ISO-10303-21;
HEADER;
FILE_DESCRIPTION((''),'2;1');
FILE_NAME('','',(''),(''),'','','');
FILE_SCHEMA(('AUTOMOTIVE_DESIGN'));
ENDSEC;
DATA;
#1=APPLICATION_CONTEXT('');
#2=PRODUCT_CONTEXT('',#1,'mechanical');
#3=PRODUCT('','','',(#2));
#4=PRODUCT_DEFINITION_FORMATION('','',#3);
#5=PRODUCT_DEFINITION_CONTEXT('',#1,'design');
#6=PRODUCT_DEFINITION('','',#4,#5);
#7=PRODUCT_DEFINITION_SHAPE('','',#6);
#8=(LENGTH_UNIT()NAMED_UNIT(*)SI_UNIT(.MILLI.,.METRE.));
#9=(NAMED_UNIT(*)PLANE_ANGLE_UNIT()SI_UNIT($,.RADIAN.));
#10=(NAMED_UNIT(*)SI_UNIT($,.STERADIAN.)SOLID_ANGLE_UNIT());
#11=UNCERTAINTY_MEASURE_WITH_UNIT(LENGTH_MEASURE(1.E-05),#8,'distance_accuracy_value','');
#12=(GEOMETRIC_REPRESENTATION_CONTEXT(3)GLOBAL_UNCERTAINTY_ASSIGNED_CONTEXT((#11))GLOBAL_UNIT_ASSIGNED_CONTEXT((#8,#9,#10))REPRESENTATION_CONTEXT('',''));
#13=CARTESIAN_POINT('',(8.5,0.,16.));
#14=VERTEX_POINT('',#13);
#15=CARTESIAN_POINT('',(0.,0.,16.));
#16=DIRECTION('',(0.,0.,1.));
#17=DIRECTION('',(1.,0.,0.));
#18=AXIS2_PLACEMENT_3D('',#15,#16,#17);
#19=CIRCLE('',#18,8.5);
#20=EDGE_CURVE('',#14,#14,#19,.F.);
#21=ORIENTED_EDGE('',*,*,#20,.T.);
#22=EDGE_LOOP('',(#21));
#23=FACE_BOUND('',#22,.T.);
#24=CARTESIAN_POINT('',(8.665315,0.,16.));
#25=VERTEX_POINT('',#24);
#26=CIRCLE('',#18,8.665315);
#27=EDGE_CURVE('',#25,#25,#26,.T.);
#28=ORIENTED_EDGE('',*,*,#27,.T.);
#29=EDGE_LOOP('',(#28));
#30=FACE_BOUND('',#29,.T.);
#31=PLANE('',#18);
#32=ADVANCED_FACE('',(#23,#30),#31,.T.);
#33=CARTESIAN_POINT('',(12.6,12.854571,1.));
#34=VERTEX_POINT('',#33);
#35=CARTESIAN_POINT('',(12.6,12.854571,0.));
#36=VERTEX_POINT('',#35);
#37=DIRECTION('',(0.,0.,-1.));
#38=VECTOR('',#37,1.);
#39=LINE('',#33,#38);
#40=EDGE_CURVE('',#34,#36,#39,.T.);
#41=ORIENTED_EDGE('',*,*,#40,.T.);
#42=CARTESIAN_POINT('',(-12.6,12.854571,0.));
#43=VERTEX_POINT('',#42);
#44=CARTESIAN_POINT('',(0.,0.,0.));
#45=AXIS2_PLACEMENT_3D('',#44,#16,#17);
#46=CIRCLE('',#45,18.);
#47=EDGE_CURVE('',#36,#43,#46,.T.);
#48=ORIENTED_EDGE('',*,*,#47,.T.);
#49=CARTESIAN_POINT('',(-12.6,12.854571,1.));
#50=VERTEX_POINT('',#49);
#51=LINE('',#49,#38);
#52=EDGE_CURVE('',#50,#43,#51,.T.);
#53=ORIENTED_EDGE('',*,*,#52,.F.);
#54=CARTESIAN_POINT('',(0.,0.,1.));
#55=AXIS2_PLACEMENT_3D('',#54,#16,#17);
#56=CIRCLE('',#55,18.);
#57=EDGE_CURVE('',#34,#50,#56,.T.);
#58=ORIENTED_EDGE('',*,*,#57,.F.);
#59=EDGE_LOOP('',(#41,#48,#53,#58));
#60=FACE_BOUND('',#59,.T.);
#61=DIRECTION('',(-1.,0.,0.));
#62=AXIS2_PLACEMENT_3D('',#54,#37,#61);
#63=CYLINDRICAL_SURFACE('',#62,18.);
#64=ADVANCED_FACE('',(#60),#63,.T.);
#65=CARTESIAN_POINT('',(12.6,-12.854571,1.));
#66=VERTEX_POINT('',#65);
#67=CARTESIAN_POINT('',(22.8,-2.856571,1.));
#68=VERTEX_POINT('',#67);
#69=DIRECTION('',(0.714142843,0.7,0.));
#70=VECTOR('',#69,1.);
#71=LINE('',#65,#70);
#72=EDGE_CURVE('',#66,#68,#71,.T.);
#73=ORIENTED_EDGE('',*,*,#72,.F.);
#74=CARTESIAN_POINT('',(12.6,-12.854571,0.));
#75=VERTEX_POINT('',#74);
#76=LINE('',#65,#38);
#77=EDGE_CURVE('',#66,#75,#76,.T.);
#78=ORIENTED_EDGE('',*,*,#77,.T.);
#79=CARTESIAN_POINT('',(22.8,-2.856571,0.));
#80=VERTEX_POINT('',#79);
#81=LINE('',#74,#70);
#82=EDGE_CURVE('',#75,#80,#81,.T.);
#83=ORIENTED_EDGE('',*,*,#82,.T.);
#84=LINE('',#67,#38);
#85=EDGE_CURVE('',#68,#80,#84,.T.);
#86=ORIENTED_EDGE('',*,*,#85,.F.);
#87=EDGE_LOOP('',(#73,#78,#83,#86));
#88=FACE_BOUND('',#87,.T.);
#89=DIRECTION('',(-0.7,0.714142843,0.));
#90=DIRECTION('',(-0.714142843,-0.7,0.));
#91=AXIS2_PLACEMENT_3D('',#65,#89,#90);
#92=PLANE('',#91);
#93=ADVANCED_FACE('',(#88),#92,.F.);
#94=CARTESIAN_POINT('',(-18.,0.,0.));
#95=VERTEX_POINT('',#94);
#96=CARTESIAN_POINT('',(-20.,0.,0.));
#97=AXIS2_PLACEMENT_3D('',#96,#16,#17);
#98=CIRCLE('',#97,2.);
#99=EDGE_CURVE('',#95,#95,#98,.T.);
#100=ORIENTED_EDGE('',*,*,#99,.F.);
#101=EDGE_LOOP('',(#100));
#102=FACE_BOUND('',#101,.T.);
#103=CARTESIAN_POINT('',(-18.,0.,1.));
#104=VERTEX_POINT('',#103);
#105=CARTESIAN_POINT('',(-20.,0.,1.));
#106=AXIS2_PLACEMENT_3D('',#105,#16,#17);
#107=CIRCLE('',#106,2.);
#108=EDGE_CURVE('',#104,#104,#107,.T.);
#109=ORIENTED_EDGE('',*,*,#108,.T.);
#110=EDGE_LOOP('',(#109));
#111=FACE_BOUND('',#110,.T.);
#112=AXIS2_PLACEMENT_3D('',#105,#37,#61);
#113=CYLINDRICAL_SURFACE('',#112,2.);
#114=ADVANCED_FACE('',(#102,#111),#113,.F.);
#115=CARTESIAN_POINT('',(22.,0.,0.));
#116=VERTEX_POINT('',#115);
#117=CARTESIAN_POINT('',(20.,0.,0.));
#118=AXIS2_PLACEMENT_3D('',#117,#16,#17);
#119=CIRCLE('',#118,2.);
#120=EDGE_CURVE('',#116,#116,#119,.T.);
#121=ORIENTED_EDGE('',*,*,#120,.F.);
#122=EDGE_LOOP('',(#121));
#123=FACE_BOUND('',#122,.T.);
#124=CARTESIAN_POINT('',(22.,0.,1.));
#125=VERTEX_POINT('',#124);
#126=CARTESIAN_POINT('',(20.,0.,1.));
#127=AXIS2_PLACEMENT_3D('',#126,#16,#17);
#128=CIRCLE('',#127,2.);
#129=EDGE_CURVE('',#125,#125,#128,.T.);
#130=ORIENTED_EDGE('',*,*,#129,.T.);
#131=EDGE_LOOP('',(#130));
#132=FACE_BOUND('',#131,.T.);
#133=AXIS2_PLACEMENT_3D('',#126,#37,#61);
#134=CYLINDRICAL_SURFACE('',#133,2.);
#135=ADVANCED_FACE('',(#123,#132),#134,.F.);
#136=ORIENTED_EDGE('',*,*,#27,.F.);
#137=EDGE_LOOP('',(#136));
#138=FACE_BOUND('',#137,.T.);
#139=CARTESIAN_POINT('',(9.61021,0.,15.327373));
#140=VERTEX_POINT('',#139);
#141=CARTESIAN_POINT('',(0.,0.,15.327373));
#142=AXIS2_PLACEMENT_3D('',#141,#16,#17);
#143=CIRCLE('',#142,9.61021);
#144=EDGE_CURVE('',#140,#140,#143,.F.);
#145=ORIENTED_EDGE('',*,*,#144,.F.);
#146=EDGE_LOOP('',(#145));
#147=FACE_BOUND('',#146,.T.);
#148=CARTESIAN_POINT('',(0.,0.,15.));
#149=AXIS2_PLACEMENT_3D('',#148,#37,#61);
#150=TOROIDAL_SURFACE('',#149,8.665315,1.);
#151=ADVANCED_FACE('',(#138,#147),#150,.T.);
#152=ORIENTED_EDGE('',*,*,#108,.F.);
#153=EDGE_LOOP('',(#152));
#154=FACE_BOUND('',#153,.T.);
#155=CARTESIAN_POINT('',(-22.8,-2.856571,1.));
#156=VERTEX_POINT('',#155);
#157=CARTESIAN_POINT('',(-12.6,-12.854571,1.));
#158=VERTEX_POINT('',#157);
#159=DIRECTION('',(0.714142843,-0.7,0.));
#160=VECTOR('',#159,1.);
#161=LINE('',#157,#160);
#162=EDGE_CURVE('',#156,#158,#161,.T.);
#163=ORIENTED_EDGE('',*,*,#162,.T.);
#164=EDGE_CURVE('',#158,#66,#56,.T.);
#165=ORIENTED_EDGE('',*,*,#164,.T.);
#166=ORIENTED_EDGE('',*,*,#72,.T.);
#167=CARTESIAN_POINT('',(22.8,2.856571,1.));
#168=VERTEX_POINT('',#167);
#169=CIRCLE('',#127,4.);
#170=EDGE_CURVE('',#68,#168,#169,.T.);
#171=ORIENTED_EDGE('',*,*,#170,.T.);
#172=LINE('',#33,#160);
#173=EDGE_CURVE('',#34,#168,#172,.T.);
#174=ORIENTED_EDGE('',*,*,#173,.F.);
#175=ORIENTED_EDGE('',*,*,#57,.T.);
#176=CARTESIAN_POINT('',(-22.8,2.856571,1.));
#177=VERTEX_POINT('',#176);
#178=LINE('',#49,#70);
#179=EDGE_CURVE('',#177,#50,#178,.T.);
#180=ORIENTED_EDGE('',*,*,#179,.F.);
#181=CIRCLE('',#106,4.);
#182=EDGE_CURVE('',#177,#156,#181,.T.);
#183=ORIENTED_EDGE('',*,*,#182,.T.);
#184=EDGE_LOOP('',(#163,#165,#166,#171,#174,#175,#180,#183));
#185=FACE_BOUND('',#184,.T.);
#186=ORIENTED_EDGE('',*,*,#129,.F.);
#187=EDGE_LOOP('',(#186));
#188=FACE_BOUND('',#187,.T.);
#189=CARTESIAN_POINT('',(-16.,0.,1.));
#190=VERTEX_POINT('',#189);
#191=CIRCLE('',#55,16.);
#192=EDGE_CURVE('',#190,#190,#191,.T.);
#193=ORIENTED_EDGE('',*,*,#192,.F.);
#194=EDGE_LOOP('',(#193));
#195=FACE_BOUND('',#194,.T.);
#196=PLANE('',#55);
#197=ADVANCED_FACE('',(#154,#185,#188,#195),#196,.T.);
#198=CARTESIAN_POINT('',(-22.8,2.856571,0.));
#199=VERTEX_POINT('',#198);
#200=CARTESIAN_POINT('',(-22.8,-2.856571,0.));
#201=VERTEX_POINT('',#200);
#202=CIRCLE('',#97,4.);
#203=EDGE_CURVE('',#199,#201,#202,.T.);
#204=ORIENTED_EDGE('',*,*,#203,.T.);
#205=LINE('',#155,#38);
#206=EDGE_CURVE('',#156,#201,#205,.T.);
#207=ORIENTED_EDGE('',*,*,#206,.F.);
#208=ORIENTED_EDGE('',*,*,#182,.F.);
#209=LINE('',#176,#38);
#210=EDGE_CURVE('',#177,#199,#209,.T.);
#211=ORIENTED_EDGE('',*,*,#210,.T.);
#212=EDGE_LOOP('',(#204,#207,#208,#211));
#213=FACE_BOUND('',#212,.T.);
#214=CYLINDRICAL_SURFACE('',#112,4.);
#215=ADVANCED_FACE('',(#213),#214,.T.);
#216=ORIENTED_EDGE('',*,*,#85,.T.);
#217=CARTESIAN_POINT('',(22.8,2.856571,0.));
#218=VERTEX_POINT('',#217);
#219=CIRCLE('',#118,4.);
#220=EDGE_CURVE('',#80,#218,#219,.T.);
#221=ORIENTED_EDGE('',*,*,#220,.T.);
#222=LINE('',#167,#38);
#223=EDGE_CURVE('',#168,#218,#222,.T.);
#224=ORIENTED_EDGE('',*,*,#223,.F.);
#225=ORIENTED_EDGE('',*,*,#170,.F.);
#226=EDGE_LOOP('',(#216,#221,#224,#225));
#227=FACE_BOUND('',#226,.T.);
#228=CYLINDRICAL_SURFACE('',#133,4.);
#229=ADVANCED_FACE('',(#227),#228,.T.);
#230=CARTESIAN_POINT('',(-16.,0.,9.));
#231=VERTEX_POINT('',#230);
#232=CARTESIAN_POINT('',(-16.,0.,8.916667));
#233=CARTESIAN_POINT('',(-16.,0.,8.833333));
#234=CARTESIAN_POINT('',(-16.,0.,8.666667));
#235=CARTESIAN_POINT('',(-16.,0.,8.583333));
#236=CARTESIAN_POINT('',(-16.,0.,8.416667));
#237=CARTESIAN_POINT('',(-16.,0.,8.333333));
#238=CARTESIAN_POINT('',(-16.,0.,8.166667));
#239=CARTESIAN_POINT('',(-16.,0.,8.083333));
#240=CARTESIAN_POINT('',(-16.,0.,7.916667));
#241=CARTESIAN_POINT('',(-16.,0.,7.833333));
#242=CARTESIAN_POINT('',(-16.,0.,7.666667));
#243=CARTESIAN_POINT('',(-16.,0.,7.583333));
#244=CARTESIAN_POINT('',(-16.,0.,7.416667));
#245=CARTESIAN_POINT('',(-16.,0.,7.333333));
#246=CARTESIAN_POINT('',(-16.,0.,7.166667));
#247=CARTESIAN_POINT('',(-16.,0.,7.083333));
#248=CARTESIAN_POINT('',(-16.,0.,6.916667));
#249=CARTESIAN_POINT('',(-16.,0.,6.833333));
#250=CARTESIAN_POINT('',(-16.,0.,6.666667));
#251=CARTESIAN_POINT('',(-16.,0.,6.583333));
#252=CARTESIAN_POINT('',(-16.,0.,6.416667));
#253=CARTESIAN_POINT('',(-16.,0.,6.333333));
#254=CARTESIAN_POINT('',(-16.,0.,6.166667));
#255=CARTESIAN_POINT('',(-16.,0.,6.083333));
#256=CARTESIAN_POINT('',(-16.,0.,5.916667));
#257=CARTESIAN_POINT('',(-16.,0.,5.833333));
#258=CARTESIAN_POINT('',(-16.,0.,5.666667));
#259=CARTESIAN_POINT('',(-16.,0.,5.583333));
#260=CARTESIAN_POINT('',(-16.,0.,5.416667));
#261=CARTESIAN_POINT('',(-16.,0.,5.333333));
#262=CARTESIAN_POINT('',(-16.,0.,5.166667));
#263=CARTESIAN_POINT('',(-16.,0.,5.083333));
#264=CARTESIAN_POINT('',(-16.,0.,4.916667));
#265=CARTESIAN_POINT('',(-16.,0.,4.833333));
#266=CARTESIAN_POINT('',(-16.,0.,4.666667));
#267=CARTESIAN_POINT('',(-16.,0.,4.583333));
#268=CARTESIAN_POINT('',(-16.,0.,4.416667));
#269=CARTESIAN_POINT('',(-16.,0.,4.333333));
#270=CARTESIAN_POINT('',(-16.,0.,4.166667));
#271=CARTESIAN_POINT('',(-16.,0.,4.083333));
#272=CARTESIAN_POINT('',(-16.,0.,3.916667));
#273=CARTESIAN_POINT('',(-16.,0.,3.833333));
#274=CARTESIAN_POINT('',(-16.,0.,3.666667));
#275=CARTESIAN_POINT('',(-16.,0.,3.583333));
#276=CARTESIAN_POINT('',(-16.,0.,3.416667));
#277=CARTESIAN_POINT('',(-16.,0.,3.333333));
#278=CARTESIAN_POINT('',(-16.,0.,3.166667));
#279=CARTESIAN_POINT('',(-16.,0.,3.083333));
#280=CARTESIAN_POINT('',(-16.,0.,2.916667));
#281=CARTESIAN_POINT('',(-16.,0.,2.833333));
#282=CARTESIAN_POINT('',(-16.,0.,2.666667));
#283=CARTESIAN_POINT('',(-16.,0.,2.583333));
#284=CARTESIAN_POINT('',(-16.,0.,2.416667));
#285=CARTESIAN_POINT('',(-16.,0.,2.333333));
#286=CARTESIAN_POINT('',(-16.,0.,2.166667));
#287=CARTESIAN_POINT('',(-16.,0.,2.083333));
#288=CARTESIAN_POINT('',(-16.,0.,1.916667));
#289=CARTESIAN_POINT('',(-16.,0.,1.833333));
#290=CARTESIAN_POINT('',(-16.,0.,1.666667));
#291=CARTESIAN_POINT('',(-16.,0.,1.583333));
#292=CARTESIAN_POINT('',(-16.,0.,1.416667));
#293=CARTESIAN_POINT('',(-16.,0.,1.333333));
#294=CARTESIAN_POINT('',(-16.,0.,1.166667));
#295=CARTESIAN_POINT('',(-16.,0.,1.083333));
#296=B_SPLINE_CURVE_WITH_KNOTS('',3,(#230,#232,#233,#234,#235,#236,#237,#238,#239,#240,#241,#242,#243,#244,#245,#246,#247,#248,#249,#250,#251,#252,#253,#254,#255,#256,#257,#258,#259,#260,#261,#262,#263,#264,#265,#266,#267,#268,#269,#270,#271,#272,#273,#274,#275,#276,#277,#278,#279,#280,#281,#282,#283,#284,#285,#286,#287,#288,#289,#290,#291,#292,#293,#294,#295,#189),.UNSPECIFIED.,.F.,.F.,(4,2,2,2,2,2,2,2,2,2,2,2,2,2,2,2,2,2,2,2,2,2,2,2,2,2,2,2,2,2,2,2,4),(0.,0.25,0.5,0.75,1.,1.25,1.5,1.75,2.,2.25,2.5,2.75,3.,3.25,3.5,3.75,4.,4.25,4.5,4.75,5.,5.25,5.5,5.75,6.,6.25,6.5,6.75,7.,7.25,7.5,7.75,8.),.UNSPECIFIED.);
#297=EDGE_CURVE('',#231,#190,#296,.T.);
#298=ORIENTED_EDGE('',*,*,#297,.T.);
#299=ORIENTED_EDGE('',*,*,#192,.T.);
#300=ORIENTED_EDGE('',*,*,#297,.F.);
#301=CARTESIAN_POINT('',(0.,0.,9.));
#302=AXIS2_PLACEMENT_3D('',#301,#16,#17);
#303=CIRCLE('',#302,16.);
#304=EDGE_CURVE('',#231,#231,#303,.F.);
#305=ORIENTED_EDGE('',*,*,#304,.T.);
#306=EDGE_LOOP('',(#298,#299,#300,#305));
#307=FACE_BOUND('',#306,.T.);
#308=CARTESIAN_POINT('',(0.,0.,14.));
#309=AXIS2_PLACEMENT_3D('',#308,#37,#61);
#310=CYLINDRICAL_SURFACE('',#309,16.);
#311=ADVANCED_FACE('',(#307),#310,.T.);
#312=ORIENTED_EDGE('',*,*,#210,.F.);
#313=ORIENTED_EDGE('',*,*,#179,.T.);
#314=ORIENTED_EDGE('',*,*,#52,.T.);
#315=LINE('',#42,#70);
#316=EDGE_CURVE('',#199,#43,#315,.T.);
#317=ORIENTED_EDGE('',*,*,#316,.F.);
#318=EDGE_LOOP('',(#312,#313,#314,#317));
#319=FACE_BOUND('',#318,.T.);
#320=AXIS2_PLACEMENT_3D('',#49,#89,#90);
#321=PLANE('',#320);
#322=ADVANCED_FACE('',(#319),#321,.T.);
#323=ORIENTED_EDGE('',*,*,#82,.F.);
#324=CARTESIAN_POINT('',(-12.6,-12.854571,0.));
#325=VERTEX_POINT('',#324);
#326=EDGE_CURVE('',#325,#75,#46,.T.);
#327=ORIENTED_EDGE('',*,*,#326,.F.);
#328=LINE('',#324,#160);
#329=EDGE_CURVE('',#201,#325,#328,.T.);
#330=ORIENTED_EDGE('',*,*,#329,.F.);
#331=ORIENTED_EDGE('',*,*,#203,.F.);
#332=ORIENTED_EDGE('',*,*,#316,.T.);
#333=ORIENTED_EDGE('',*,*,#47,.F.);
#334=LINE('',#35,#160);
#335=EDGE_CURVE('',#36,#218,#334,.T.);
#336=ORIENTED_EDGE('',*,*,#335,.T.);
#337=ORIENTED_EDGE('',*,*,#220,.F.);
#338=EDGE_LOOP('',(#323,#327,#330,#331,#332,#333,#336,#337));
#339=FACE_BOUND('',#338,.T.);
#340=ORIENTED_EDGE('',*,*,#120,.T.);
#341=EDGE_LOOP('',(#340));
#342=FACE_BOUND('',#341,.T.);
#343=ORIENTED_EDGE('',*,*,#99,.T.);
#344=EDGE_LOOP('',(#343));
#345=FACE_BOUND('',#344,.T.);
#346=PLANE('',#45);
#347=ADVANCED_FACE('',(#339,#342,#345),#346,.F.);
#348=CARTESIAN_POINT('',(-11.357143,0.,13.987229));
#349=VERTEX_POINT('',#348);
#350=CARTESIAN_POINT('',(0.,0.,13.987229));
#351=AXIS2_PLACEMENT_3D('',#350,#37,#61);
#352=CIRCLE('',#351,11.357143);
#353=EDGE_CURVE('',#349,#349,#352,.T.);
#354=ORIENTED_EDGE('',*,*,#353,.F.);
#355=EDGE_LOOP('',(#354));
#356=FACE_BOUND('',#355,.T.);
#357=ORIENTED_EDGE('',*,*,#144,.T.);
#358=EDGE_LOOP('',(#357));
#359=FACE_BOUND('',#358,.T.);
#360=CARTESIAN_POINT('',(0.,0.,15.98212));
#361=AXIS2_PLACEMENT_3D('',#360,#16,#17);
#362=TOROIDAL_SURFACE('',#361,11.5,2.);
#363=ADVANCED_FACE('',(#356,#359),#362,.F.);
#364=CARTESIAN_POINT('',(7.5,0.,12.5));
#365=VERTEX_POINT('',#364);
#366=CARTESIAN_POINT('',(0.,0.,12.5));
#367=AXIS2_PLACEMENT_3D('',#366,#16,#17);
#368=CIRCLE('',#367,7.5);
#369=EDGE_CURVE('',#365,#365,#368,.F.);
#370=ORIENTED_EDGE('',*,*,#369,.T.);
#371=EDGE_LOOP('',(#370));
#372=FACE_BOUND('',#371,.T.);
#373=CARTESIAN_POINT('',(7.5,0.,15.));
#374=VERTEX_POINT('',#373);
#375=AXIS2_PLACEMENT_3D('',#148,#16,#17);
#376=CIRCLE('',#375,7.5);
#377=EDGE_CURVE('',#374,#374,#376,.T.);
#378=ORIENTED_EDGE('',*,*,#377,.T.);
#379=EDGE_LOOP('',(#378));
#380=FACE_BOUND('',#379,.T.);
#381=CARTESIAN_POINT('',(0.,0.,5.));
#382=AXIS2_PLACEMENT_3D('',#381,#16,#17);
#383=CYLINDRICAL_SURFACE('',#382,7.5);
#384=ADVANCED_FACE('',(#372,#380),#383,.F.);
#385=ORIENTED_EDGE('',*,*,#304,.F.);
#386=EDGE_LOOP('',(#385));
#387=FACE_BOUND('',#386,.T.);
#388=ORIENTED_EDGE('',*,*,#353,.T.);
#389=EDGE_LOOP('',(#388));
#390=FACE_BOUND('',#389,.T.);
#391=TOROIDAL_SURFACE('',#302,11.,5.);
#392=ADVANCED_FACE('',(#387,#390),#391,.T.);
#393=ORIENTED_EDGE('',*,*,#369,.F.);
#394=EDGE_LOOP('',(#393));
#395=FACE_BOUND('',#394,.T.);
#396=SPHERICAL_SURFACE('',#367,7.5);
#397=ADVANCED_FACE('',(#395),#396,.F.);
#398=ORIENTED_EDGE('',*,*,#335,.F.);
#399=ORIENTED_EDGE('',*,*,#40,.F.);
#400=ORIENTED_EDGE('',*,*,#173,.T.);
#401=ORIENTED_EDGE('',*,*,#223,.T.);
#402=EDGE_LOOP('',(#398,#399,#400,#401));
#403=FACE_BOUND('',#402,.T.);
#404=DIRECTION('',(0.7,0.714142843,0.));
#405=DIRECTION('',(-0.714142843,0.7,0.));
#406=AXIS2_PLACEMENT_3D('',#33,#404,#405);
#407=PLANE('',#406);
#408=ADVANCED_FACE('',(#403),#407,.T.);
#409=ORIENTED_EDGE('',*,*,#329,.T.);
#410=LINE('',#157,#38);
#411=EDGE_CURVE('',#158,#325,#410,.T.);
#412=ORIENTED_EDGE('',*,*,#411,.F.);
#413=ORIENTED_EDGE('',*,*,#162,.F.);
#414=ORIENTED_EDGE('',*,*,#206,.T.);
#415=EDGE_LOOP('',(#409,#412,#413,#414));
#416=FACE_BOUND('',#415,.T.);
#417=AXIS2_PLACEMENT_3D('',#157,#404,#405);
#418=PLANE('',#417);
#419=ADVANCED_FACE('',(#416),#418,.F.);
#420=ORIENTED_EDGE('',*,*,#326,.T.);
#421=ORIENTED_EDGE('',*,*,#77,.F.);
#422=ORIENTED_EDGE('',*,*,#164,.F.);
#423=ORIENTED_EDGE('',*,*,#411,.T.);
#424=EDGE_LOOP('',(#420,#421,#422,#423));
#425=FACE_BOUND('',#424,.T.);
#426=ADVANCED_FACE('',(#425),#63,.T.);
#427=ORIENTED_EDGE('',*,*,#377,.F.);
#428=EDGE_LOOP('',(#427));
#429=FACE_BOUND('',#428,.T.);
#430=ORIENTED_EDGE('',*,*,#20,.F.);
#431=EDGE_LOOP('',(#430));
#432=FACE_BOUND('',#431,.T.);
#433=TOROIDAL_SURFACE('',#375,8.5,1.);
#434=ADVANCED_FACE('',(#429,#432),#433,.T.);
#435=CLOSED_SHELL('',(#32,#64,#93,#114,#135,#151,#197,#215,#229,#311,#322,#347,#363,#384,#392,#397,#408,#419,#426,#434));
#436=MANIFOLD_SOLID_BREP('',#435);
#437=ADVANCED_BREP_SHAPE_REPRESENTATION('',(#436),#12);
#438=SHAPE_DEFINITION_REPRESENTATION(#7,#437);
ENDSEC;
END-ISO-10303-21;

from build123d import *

# Parameters (mm, degrees)
SKETCH1_R           = 2
BOSS_EXTRUDE1_DEPTH = 1
SKETCH2_R           = 16
BOSS_EXTRUDE2_DEPTH = 13
SKETCH3_R           = 9.5
BOSS_EXTRUDE3_DEPTH = 2
FILLET1_R           = 5
FILLET2_R           = 2
SKETCH4_R           = 7.5
CUT_EXTRUDE1_DEPTH  = 11
FILLET3_R           = 7.5
FILLET4_R           = 1
FILLET5_R           = 1


with BuildPart() as part:
    # Sketch1 → Boss-Extrude1 (new body)
    with BuildSketch(Plane.XY):
        with BuildLine():
            Line((-12.6, 12.854571171), (-22.8, 2.856571371))
            ThreePointArc((-22.8, 2.856571371), (-24, 0), (-22.8, -2.856571371))
            Line((-22.8, -2.856571371), (-12.6, -12.854571171))
            ThreePointArc((-12.6, -12.854571171), (0, -18), (12.6, -12.854571171))
            Line((12.6, -12.854571171), (22.8, -2.856571371))
            ThreePointArc((22.8, -2.856571371), (24, 0), (22.8, 2.856571371))
            Line((22.8, 2.856571371), (12.6, 12.854571171))
            ThreePointArc((12.6, 12.854571171), (0, 18), (-12.6, 12.854571171))
        make_face()
        with Locations((-20, 0)):
            Circle(SKETCH1_R, mode=Mode.SUBTRACT)
        with Locations((20, 0)):
            Circle(SKETCH1_R, mode=Mode.SUBTRACT)
    extrude(amount=BOSS_EXTRUDE1_DEPTH)

    # Sketch2 → Boss-Extrude2 (add)
    with BuildSketch(Plane.XY.offset(1)):
        with Locations(Location((0, 0, 0), (0, 0, 180))):
            Circle(SKETCH2_R)
    extrude(amount=BOSS_EXTRUDE2_DEPTH)

    # Sketch3 → Boss-Extrude3 (add)
    with BuildSketch(Plane.XY.offset(14)):
        Circle(SKETCH3_R)
    extrude(amount=BOSS_EXTRUDE3_DEPTH)

    # Fillet1
    fillet1_edges = [part.edges().sort_by_distance(p)[0] for p in [
        (16, 0, 14),
    ]]
    fillet(fillet1_edges, radius=FILLET1_R)

    # Fillet2
    fillet2_edges = [part.edges().sort_by_distance(p)[0] for p in [
        (-9.5, 0, 14),
    ]]
    fillet(fillet2_edges, radius=FILLET2_R - 0.0001)  # a hair under: the kernel refuses the full size

    # Sketch4 → Cut-Extrude1 (cut)
    with BuildSketch(Plane.XY.offset(16)):
        Circle(SKETCH4_R)
    extrude(amount=-CUT_EXTRUDE1_DEPTH, mode=Mode.SUBTRACT)

    # Fillet3
    fillet3_edges = [part.edges().sort_by_distance(p)[0] for p in [
        (-7.5, 0, 5),
    ]]
    fillet(fillet3_edges, radius=FILLET3_R)

    # Fillet4
    fillet4_edges = [part.edges().sort_by_distance(p)[0] for p in [
        (-9.5, 0, 16),
    ]]
    fillet(fillet4_edges, radius=FILLET4_R)

    # Fillet5
    fillet5_edges = [part.edges().sort_by_distance(p)[0] for p in [
        (-7.5, 0, 16),
    ]]
    fillet(fillet5_edges, radius=FILLET5_R)


solid = part.part
